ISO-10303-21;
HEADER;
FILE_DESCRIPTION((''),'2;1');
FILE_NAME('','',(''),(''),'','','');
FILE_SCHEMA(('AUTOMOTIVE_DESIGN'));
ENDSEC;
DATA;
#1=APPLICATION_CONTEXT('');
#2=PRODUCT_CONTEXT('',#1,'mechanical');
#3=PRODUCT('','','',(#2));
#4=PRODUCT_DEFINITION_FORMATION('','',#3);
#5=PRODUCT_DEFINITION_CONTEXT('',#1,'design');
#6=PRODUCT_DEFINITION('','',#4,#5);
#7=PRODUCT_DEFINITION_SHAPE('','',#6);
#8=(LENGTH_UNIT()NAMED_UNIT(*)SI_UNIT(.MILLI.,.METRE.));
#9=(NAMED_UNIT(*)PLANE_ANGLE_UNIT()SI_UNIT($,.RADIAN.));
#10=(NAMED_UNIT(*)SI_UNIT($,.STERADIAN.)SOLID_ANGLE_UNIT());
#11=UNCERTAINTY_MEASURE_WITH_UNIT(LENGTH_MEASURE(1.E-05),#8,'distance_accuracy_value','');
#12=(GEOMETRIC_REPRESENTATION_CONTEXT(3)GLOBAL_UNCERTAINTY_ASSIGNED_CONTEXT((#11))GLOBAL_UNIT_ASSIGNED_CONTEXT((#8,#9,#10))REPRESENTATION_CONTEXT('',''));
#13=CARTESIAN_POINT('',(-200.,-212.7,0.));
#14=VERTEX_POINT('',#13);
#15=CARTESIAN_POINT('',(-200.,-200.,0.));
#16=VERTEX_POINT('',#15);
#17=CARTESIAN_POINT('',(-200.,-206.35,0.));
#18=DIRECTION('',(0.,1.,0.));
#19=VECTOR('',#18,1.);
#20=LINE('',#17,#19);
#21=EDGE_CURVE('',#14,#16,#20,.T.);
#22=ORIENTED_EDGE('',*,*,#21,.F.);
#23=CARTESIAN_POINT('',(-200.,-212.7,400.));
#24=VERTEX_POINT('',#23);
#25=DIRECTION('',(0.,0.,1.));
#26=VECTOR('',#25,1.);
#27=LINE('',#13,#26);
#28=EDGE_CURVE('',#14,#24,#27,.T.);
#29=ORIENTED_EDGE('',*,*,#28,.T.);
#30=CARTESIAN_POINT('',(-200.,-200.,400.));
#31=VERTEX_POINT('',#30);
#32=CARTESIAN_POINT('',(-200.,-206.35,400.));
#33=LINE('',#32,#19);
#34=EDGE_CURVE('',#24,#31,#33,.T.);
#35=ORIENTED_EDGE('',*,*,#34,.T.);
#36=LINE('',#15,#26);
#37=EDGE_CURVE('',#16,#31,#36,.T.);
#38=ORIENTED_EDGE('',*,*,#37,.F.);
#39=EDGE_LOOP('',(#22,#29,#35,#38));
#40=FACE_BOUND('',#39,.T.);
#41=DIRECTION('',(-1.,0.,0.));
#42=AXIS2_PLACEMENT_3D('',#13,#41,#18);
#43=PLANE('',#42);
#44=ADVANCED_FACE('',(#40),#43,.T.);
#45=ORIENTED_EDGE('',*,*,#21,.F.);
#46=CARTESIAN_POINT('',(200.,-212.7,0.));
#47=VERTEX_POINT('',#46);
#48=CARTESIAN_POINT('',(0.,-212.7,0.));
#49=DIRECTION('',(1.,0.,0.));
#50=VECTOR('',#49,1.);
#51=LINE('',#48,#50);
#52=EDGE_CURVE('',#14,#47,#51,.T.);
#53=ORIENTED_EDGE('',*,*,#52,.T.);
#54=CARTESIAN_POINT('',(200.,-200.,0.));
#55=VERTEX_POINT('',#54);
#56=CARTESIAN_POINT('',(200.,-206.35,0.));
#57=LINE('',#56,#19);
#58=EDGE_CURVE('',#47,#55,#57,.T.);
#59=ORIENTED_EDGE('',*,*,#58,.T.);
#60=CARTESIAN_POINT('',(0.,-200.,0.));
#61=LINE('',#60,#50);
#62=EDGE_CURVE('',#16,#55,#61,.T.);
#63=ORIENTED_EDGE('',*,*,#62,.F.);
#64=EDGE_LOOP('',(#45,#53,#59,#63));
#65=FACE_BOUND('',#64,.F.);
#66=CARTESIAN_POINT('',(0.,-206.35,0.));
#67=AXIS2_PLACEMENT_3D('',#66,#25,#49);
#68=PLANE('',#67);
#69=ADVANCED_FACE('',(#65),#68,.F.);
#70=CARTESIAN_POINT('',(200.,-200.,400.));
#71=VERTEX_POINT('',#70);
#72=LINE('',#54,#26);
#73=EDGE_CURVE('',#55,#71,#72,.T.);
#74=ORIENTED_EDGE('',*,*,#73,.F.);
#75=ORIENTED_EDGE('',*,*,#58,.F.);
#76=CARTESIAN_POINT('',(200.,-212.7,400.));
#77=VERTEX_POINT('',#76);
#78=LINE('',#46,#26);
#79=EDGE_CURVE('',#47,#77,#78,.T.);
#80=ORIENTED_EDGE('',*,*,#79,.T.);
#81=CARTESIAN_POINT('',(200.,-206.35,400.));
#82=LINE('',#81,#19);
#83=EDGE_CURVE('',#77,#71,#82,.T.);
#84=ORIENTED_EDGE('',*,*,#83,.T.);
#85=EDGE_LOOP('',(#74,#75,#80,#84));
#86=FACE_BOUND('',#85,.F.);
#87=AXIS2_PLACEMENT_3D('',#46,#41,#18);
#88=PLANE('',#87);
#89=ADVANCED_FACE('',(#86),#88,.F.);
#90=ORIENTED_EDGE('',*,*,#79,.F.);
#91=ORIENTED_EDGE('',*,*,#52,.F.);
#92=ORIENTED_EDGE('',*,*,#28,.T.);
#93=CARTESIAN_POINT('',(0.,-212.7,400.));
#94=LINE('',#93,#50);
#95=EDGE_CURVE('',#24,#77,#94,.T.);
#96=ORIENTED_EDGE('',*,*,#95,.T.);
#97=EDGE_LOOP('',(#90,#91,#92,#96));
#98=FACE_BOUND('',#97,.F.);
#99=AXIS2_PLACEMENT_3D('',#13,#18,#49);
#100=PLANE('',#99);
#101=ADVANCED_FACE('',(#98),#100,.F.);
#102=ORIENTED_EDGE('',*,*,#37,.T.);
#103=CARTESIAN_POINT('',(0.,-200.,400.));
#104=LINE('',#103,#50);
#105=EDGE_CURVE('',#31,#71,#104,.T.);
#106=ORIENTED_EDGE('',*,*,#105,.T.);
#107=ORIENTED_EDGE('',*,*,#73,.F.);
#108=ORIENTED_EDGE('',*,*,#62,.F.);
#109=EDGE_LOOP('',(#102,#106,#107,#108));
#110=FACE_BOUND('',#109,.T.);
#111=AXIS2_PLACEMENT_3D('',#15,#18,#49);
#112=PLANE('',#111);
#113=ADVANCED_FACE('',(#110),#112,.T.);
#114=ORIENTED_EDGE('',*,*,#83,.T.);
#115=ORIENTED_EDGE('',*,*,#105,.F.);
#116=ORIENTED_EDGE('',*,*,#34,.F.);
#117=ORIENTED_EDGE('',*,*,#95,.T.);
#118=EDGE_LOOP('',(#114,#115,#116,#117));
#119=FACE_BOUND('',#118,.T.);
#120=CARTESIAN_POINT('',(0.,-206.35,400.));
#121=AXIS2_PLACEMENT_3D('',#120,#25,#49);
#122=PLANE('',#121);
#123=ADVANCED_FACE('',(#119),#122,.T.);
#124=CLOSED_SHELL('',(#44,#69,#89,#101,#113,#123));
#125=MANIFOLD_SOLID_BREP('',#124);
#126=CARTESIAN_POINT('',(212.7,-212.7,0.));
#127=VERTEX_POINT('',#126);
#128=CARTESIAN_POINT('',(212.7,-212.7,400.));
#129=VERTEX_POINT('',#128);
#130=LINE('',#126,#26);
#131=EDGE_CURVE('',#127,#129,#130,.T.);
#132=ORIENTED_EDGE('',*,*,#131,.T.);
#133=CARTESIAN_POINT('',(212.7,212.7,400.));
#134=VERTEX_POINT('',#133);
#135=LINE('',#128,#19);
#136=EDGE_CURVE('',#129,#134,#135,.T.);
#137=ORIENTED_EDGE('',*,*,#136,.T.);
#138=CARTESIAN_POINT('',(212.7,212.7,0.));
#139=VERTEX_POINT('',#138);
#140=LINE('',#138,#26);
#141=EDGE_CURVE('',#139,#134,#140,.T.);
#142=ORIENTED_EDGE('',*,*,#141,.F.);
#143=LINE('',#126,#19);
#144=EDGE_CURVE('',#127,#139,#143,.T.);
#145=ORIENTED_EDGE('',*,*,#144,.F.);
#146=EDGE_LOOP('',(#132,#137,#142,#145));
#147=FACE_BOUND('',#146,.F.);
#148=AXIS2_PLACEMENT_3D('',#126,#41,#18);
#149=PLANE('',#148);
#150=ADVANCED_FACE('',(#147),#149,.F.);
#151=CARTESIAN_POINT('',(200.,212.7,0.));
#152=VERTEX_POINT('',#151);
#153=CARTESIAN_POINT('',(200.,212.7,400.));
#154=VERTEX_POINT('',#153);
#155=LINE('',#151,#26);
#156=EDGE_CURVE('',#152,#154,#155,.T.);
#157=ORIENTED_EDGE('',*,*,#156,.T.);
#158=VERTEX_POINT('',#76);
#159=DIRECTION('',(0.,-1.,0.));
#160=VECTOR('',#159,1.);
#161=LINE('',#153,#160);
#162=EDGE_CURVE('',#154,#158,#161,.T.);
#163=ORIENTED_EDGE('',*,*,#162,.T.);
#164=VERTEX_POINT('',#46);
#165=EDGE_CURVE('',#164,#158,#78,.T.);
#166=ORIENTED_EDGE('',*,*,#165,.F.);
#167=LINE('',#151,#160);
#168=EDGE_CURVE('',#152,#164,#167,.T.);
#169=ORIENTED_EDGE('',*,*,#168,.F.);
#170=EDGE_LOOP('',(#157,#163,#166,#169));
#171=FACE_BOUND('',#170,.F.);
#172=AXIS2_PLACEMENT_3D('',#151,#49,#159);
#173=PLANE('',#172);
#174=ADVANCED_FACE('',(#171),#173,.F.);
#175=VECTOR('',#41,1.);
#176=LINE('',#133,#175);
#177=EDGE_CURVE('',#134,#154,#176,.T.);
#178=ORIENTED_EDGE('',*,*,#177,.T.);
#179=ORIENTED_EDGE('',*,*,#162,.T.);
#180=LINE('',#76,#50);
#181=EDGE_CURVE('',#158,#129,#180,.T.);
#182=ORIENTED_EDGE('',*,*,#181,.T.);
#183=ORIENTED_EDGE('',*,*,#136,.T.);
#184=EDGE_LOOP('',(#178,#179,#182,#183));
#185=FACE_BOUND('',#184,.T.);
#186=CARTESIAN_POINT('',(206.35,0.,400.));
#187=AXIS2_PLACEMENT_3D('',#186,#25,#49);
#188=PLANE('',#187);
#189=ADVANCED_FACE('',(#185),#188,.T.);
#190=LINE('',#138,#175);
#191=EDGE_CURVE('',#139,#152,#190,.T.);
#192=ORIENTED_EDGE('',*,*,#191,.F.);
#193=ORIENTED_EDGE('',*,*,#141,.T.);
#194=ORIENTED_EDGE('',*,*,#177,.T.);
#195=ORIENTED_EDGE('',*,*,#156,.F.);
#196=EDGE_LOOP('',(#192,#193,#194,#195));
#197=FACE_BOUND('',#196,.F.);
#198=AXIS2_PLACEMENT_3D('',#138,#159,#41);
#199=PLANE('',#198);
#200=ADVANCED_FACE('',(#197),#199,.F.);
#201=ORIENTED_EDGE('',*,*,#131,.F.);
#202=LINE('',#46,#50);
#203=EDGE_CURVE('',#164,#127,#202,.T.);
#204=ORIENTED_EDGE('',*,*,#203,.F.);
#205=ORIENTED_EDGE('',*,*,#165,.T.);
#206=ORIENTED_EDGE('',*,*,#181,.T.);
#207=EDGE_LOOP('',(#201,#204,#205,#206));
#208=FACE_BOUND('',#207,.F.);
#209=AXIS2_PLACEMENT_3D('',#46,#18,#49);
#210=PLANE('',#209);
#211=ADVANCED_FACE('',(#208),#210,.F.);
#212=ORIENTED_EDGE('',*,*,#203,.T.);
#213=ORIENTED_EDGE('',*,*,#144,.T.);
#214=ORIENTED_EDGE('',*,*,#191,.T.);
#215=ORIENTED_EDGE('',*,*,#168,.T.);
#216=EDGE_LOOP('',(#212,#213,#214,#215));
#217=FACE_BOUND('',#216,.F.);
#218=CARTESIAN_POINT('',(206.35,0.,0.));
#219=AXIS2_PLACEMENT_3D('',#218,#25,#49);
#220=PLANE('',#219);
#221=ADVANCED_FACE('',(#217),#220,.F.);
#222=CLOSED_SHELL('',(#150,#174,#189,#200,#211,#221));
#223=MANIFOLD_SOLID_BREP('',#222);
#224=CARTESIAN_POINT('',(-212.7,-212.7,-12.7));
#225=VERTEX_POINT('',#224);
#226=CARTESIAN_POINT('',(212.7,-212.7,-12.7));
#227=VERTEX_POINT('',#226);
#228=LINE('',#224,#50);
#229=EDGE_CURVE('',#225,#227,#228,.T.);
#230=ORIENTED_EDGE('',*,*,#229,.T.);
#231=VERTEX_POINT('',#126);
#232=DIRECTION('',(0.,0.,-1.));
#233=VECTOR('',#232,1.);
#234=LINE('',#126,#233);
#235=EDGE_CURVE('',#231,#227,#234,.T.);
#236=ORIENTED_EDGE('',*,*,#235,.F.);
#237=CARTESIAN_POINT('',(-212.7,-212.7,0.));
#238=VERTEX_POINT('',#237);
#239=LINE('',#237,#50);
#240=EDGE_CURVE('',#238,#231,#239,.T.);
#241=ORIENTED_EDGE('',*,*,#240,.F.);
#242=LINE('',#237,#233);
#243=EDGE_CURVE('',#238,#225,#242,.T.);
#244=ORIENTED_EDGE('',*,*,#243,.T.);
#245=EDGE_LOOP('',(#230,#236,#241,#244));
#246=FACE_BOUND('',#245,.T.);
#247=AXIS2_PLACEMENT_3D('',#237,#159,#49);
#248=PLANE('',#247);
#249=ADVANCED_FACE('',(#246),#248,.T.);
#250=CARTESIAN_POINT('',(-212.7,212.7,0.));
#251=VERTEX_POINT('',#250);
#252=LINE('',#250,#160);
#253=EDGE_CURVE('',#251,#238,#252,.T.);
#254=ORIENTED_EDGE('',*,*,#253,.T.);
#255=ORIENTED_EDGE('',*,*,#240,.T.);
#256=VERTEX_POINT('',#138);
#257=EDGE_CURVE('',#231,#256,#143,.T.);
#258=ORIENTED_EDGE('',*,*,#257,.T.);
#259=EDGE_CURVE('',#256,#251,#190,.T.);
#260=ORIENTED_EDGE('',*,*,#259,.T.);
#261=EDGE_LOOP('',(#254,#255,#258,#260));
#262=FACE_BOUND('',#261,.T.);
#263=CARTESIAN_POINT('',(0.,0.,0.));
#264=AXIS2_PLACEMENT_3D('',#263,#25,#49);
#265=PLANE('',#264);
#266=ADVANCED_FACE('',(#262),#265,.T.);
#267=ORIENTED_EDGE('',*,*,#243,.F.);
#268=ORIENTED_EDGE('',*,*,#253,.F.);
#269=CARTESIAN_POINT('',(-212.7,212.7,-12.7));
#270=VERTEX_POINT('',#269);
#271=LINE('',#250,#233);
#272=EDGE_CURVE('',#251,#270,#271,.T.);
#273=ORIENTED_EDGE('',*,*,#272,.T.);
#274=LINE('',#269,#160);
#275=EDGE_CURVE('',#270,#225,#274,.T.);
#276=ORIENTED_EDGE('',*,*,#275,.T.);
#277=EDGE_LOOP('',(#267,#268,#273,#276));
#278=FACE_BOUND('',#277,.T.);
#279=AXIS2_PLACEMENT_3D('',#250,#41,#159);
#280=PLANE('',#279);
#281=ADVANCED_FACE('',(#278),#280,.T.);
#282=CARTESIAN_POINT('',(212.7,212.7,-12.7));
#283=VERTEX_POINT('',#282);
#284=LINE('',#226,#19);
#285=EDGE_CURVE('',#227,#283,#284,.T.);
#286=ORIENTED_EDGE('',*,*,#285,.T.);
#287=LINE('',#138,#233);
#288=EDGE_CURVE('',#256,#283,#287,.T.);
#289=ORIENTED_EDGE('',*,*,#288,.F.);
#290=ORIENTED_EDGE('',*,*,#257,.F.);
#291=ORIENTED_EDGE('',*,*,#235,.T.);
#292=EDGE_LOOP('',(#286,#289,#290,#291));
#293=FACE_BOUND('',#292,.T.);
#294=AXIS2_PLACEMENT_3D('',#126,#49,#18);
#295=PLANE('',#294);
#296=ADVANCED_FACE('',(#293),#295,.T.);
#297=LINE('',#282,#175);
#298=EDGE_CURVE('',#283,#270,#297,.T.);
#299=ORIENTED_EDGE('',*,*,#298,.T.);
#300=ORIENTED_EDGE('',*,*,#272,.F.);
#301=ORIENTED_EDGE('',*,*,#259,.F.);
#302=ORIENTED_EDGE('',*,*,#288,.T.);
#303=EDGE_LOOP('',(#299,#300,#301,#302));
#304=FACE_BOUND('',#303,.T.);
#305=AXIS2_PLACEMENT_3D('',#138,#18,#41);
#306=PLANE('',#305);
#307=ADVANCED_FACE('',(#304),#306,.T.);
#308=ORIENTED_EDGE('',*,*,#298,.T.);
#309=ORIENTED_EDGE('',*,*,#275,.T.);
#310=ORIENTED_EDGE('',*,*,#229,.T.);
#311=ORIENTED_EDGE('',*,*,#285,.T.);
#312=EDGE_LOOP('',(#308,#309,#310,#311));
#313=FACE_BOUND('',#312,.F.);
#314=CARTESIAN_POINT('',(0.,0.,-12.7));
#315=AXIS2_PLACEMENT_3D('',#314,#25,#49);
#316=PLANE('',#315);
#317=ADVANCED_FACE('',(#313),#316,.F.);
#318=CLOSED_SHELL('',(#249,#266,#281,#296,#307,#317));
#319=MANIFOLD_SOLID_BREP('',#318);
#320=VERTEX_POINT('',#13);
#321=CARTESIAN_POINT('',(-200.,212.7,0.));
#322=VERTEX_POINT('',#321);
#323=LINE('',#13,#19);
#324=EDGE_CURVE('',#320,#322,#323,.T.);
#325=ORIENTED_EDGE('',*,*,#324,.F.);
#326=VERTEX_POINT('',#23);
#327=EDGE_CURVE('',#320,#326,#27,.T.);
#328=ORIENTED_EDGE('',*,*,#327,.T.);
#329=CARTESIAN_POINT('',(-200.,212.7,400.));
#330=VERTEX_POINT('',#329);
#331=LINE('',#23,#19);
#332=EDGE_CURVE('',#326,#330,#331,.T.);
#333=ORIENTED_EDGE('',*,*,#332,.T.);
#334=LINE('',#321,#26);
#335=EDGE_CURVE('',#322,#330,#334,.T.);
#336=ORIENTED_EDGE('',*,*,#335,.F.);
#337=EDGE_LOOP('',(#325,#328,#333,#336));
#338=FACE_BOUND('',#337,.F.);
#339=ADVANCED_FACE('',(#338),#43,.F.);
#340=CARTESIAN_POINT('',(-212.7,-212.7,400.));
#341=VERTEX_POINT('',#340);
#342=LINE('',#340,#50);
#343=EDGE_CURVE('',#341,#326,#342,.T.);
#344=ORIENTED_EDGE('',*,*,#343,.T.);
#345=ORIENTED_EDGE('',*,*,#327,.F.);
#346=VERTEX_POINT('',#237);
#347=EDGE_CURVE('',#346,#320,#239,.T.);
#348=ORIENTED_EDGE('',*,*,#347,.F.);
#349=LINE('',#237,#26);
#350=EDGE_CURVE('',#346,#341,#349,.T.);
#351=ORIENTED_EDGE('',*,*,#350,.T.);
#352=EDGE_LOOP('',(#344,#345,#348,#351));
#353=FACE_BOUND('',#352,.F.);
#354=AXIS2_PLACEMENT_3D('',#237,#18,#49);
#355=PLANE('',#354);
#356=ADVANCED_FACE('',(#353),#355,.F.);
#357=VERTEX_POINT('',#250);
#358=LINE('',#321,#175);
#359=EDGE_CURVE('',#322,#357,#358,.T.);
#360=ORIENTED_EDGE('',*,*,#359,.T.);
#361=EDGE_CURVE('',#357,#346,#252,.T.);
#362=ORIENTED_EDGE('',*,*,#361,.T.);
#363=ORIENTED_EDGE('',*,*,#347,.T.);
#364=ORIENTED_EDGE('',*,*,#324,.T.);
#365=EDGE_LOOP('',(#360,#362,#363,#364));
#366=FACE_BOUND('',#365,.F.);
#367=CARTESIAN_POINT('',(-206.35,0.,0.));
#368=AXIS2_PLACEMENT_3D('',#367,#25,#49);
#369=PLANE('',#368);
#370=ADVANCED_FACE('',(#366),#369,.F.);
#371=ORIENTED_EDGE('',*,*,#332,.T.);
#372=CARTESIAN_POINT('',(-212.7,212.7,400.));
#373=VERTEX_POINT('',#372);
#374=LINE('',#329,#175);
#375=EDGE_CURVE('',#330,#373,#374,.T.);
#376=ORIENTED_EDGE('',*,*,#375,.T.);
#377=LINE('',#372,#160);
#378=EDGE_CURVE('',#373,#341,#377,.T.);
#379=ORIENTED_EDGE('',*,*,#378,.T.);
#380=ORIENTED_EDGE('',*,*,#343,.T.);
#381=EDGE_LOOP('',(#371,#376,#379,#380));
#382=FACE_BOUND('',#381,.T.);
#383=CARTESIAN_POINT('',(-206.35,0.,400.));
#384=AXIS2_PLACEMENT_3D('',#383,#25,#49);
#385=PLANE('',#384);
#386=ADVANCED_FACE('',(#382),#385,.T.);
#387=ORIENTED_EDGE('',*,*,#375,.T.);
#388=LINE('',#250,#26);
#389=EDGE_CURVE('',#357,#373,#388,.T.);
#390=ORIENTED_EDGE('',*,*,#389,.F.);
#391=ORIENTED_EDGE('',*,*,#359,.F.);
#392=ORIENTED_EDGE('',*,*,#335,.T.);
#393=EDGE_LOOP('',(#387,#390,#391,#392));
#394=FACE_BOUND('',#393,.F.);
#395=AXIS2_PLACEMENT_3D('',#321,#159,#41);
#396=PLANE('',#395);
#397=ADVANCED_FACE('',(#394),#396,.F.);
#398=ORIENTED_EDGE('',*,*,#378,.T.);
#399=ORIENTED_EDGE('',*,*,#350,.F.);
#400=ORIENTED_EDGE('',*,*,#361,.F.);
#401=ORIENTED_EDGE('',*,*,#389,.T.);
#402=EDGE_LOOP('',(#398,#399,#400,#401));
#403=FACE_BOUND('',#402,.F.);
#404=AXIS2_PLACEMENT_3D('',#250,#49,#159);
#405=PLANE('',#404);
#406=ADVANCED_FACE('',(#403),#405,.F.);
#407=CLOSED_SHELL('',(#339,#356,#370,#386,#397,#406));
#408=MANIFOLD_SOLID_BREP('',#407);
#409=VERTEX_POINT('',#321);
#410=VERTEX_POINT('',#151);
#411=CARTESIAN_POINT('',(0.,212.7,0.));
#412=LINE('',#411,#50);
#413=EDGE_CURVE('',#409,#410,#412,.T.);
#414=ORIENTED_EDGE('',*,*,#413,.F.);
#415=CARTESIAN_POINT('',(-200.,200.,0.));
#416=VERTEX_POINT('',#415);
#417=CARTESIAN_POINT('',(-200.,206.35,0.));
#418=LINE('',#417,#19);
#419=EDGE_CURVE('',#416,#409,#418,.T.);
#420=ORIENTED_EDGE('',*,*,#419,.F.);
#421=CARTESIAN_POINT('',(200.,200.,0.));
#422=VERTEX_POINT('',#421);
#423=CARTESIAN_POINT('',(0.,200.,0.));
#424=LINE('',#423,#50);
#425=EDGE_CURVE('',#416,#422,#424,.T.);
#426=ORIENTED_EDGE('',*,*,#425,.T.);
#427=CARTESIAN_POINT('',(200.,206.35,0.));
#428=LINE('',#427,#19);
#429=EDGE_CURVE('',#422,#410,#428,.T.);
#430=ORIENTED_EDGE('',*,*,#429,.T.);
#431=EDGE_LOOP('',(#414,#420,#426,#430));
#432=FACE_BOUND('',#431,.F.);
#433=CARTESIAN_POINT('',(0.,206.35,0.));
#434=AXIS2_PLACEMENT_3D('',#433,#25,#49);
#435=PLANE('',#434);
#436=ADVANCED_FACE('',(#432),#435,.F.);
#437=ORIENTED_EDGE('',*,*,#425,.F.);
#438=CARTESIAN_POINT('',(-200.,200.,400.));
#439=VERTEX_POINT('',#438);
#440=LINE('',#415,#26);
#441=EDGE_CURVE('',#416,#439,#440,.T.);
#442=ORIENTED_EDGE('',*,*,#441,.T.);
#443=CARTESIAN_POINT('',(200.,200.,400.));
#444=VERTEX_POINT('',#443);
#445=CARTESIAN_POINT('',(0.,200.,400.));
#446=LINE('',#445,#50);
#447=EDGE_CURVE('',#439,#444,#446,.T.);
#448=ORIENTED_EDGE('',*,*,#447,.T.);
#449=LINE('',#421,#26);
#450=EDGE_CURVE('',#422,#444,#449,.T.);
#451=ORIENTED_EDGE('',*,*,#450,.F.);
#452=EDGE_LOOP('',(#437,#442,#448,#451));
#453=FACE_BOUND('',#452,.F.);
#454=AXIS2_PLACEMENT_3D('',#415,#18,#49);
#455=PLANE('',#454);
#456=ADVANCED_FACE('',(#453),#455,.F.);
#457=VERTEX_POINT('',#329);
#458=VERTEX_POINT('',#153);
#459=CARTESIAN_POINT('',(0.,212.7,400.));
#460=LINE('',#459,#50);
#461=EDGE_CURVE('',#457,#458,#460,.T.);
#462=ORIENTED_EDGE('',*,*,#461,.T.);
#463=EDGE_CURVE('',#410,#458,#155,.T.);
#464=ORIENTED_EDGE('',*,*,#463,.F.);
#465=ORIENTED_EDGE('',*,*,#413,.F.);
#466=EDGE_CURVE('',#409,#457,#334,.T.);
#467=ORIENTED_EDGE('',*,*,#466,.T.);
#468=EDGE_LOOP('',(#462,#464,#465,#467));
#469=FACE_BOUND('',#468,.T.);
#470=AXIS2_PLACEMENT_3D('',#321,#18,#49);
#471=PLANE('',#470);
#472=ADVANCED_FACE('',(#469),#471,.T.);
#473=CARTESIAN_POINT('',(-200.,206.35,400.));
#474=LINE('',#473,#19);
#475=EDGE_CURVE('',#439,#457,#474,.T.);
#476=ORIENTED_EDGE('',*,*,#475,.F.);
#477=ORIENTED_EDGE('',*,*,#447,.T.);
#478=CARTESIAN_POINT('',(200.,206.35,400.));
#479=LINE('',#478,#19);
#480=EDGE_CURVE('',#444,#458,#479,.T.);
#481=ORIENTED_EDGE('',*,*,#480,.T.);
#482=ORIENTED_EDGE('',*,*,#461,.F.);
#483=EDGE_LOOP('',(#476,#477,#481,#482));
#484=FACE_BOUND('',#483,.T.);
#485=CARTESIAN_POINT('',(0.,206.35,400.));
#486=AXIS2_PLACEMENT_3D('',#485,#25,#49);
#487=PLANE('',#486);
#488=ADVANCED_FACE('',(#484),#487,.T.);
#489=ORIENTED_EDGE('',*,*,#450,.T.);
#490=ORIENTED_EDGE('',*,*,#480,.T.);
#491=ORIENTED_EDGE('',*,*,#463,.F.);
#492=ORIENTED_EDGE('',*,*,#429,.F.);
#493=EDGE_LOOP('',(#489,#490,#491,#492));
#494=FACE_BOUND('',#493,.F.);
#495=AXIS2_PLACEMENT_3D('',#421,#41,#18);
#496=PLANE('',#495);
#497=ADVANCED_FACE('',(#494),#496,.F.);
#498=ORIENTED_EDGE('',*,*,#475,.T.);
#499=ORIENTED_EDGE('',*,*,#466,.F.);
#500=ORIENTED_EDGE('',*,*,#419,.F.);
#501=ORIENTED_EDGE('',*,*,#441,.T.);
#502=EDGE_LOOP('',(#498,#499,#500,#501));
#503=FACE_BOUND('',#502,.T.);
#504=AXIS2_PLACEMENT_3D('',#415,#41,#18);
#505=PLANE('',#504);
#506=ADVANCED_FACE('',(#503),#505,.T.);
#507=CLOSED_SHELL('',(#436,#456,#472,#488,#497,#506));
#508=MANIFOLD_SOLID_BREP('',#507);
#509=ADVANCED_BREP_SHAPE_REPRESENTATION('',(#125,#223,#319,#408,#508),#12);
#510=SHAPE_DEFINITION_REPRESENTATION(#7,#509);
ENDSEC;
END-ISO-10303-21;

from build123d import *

# Parameters (mm, degrees)
F0_W     = 400
F0_H     = 400
F0_H_2   = 12.7
F1_DEPTH = 12.7
F2_DEPTH = 400
F3_DEPTH = 400
F4_DEPTH = 400
F5_DEPTH = 400


# Not quite as in the source:
# - a length typed as a fraction of an inch, garbled in the dataset ("3 / 203.2 mm" for 3/8 in), is restored


with BuildPart() as f1:
    # F0 (on Top) → F1 (new body)
    with BuildSketch(Plane.XY):
        Rectangle(F0_W, F0_H)
        with Locations((0, -206.35)):
            Rectangle(F0_W, F0_H_2)
        Polygon((200, 212.7), (200, 200), (200, -200), (200, -212.7), (212.7, -212.7), (212.7, 212.7), align=None)
        with Locations((0, 206.35)):
            Rectangle(F0_W, F0_H_2)
        Polygon((-200, -200), (-200, 200), (-200, 212.7), (-212.7, 212.7), (-212.7, -212.7), (-200, -212.7), align=None)
    extrude(amount=-F1_DEPTH)


with BuildPart() as f2:
    # F0 (on Top) → F2 (new body)
    with BuildSketch(Plane.XY):
        Polygon((-200, -200), (-200, 200), (-200, 212.7), (-212.7, 212.7), (-212.7, -212.7), (-200, -212.7), align=None)
    extrude(amount=F2_DEPTH)


with BuildPart() as f3:
    # F0 (on Top) → F3 (new body)
    with BuildSketch(Plane.XY):
        with Locations((0, 206.35)):
            Rectangle(F0_W, F0_H_2)
    extrude(amount=F3_DEPTH)


with BuildPart() as f4:
    # F0 (on Top) → F4 (new body)
    with BuildSketch(Plane.XY):
        Polygon((200, 212.7), (200, 200), (200, -200), (200, -212.7), (212.7, -212.7), (212.7, 212.7), align=None)
    extrude(amount=F4_DEPTH)


with BuildPart() as f5:
    # F0 (on Top) → F5 (new body)
    with BuildSketch(Plane.XY):
        with Locations((0, -206.35)):
            Rectangle(F0_W, F0_H_2)
    extrude(amount=F5_DEPTH)


solid = Compound([f1.part, f2.part, f3.part, f4.part, f5.part])
